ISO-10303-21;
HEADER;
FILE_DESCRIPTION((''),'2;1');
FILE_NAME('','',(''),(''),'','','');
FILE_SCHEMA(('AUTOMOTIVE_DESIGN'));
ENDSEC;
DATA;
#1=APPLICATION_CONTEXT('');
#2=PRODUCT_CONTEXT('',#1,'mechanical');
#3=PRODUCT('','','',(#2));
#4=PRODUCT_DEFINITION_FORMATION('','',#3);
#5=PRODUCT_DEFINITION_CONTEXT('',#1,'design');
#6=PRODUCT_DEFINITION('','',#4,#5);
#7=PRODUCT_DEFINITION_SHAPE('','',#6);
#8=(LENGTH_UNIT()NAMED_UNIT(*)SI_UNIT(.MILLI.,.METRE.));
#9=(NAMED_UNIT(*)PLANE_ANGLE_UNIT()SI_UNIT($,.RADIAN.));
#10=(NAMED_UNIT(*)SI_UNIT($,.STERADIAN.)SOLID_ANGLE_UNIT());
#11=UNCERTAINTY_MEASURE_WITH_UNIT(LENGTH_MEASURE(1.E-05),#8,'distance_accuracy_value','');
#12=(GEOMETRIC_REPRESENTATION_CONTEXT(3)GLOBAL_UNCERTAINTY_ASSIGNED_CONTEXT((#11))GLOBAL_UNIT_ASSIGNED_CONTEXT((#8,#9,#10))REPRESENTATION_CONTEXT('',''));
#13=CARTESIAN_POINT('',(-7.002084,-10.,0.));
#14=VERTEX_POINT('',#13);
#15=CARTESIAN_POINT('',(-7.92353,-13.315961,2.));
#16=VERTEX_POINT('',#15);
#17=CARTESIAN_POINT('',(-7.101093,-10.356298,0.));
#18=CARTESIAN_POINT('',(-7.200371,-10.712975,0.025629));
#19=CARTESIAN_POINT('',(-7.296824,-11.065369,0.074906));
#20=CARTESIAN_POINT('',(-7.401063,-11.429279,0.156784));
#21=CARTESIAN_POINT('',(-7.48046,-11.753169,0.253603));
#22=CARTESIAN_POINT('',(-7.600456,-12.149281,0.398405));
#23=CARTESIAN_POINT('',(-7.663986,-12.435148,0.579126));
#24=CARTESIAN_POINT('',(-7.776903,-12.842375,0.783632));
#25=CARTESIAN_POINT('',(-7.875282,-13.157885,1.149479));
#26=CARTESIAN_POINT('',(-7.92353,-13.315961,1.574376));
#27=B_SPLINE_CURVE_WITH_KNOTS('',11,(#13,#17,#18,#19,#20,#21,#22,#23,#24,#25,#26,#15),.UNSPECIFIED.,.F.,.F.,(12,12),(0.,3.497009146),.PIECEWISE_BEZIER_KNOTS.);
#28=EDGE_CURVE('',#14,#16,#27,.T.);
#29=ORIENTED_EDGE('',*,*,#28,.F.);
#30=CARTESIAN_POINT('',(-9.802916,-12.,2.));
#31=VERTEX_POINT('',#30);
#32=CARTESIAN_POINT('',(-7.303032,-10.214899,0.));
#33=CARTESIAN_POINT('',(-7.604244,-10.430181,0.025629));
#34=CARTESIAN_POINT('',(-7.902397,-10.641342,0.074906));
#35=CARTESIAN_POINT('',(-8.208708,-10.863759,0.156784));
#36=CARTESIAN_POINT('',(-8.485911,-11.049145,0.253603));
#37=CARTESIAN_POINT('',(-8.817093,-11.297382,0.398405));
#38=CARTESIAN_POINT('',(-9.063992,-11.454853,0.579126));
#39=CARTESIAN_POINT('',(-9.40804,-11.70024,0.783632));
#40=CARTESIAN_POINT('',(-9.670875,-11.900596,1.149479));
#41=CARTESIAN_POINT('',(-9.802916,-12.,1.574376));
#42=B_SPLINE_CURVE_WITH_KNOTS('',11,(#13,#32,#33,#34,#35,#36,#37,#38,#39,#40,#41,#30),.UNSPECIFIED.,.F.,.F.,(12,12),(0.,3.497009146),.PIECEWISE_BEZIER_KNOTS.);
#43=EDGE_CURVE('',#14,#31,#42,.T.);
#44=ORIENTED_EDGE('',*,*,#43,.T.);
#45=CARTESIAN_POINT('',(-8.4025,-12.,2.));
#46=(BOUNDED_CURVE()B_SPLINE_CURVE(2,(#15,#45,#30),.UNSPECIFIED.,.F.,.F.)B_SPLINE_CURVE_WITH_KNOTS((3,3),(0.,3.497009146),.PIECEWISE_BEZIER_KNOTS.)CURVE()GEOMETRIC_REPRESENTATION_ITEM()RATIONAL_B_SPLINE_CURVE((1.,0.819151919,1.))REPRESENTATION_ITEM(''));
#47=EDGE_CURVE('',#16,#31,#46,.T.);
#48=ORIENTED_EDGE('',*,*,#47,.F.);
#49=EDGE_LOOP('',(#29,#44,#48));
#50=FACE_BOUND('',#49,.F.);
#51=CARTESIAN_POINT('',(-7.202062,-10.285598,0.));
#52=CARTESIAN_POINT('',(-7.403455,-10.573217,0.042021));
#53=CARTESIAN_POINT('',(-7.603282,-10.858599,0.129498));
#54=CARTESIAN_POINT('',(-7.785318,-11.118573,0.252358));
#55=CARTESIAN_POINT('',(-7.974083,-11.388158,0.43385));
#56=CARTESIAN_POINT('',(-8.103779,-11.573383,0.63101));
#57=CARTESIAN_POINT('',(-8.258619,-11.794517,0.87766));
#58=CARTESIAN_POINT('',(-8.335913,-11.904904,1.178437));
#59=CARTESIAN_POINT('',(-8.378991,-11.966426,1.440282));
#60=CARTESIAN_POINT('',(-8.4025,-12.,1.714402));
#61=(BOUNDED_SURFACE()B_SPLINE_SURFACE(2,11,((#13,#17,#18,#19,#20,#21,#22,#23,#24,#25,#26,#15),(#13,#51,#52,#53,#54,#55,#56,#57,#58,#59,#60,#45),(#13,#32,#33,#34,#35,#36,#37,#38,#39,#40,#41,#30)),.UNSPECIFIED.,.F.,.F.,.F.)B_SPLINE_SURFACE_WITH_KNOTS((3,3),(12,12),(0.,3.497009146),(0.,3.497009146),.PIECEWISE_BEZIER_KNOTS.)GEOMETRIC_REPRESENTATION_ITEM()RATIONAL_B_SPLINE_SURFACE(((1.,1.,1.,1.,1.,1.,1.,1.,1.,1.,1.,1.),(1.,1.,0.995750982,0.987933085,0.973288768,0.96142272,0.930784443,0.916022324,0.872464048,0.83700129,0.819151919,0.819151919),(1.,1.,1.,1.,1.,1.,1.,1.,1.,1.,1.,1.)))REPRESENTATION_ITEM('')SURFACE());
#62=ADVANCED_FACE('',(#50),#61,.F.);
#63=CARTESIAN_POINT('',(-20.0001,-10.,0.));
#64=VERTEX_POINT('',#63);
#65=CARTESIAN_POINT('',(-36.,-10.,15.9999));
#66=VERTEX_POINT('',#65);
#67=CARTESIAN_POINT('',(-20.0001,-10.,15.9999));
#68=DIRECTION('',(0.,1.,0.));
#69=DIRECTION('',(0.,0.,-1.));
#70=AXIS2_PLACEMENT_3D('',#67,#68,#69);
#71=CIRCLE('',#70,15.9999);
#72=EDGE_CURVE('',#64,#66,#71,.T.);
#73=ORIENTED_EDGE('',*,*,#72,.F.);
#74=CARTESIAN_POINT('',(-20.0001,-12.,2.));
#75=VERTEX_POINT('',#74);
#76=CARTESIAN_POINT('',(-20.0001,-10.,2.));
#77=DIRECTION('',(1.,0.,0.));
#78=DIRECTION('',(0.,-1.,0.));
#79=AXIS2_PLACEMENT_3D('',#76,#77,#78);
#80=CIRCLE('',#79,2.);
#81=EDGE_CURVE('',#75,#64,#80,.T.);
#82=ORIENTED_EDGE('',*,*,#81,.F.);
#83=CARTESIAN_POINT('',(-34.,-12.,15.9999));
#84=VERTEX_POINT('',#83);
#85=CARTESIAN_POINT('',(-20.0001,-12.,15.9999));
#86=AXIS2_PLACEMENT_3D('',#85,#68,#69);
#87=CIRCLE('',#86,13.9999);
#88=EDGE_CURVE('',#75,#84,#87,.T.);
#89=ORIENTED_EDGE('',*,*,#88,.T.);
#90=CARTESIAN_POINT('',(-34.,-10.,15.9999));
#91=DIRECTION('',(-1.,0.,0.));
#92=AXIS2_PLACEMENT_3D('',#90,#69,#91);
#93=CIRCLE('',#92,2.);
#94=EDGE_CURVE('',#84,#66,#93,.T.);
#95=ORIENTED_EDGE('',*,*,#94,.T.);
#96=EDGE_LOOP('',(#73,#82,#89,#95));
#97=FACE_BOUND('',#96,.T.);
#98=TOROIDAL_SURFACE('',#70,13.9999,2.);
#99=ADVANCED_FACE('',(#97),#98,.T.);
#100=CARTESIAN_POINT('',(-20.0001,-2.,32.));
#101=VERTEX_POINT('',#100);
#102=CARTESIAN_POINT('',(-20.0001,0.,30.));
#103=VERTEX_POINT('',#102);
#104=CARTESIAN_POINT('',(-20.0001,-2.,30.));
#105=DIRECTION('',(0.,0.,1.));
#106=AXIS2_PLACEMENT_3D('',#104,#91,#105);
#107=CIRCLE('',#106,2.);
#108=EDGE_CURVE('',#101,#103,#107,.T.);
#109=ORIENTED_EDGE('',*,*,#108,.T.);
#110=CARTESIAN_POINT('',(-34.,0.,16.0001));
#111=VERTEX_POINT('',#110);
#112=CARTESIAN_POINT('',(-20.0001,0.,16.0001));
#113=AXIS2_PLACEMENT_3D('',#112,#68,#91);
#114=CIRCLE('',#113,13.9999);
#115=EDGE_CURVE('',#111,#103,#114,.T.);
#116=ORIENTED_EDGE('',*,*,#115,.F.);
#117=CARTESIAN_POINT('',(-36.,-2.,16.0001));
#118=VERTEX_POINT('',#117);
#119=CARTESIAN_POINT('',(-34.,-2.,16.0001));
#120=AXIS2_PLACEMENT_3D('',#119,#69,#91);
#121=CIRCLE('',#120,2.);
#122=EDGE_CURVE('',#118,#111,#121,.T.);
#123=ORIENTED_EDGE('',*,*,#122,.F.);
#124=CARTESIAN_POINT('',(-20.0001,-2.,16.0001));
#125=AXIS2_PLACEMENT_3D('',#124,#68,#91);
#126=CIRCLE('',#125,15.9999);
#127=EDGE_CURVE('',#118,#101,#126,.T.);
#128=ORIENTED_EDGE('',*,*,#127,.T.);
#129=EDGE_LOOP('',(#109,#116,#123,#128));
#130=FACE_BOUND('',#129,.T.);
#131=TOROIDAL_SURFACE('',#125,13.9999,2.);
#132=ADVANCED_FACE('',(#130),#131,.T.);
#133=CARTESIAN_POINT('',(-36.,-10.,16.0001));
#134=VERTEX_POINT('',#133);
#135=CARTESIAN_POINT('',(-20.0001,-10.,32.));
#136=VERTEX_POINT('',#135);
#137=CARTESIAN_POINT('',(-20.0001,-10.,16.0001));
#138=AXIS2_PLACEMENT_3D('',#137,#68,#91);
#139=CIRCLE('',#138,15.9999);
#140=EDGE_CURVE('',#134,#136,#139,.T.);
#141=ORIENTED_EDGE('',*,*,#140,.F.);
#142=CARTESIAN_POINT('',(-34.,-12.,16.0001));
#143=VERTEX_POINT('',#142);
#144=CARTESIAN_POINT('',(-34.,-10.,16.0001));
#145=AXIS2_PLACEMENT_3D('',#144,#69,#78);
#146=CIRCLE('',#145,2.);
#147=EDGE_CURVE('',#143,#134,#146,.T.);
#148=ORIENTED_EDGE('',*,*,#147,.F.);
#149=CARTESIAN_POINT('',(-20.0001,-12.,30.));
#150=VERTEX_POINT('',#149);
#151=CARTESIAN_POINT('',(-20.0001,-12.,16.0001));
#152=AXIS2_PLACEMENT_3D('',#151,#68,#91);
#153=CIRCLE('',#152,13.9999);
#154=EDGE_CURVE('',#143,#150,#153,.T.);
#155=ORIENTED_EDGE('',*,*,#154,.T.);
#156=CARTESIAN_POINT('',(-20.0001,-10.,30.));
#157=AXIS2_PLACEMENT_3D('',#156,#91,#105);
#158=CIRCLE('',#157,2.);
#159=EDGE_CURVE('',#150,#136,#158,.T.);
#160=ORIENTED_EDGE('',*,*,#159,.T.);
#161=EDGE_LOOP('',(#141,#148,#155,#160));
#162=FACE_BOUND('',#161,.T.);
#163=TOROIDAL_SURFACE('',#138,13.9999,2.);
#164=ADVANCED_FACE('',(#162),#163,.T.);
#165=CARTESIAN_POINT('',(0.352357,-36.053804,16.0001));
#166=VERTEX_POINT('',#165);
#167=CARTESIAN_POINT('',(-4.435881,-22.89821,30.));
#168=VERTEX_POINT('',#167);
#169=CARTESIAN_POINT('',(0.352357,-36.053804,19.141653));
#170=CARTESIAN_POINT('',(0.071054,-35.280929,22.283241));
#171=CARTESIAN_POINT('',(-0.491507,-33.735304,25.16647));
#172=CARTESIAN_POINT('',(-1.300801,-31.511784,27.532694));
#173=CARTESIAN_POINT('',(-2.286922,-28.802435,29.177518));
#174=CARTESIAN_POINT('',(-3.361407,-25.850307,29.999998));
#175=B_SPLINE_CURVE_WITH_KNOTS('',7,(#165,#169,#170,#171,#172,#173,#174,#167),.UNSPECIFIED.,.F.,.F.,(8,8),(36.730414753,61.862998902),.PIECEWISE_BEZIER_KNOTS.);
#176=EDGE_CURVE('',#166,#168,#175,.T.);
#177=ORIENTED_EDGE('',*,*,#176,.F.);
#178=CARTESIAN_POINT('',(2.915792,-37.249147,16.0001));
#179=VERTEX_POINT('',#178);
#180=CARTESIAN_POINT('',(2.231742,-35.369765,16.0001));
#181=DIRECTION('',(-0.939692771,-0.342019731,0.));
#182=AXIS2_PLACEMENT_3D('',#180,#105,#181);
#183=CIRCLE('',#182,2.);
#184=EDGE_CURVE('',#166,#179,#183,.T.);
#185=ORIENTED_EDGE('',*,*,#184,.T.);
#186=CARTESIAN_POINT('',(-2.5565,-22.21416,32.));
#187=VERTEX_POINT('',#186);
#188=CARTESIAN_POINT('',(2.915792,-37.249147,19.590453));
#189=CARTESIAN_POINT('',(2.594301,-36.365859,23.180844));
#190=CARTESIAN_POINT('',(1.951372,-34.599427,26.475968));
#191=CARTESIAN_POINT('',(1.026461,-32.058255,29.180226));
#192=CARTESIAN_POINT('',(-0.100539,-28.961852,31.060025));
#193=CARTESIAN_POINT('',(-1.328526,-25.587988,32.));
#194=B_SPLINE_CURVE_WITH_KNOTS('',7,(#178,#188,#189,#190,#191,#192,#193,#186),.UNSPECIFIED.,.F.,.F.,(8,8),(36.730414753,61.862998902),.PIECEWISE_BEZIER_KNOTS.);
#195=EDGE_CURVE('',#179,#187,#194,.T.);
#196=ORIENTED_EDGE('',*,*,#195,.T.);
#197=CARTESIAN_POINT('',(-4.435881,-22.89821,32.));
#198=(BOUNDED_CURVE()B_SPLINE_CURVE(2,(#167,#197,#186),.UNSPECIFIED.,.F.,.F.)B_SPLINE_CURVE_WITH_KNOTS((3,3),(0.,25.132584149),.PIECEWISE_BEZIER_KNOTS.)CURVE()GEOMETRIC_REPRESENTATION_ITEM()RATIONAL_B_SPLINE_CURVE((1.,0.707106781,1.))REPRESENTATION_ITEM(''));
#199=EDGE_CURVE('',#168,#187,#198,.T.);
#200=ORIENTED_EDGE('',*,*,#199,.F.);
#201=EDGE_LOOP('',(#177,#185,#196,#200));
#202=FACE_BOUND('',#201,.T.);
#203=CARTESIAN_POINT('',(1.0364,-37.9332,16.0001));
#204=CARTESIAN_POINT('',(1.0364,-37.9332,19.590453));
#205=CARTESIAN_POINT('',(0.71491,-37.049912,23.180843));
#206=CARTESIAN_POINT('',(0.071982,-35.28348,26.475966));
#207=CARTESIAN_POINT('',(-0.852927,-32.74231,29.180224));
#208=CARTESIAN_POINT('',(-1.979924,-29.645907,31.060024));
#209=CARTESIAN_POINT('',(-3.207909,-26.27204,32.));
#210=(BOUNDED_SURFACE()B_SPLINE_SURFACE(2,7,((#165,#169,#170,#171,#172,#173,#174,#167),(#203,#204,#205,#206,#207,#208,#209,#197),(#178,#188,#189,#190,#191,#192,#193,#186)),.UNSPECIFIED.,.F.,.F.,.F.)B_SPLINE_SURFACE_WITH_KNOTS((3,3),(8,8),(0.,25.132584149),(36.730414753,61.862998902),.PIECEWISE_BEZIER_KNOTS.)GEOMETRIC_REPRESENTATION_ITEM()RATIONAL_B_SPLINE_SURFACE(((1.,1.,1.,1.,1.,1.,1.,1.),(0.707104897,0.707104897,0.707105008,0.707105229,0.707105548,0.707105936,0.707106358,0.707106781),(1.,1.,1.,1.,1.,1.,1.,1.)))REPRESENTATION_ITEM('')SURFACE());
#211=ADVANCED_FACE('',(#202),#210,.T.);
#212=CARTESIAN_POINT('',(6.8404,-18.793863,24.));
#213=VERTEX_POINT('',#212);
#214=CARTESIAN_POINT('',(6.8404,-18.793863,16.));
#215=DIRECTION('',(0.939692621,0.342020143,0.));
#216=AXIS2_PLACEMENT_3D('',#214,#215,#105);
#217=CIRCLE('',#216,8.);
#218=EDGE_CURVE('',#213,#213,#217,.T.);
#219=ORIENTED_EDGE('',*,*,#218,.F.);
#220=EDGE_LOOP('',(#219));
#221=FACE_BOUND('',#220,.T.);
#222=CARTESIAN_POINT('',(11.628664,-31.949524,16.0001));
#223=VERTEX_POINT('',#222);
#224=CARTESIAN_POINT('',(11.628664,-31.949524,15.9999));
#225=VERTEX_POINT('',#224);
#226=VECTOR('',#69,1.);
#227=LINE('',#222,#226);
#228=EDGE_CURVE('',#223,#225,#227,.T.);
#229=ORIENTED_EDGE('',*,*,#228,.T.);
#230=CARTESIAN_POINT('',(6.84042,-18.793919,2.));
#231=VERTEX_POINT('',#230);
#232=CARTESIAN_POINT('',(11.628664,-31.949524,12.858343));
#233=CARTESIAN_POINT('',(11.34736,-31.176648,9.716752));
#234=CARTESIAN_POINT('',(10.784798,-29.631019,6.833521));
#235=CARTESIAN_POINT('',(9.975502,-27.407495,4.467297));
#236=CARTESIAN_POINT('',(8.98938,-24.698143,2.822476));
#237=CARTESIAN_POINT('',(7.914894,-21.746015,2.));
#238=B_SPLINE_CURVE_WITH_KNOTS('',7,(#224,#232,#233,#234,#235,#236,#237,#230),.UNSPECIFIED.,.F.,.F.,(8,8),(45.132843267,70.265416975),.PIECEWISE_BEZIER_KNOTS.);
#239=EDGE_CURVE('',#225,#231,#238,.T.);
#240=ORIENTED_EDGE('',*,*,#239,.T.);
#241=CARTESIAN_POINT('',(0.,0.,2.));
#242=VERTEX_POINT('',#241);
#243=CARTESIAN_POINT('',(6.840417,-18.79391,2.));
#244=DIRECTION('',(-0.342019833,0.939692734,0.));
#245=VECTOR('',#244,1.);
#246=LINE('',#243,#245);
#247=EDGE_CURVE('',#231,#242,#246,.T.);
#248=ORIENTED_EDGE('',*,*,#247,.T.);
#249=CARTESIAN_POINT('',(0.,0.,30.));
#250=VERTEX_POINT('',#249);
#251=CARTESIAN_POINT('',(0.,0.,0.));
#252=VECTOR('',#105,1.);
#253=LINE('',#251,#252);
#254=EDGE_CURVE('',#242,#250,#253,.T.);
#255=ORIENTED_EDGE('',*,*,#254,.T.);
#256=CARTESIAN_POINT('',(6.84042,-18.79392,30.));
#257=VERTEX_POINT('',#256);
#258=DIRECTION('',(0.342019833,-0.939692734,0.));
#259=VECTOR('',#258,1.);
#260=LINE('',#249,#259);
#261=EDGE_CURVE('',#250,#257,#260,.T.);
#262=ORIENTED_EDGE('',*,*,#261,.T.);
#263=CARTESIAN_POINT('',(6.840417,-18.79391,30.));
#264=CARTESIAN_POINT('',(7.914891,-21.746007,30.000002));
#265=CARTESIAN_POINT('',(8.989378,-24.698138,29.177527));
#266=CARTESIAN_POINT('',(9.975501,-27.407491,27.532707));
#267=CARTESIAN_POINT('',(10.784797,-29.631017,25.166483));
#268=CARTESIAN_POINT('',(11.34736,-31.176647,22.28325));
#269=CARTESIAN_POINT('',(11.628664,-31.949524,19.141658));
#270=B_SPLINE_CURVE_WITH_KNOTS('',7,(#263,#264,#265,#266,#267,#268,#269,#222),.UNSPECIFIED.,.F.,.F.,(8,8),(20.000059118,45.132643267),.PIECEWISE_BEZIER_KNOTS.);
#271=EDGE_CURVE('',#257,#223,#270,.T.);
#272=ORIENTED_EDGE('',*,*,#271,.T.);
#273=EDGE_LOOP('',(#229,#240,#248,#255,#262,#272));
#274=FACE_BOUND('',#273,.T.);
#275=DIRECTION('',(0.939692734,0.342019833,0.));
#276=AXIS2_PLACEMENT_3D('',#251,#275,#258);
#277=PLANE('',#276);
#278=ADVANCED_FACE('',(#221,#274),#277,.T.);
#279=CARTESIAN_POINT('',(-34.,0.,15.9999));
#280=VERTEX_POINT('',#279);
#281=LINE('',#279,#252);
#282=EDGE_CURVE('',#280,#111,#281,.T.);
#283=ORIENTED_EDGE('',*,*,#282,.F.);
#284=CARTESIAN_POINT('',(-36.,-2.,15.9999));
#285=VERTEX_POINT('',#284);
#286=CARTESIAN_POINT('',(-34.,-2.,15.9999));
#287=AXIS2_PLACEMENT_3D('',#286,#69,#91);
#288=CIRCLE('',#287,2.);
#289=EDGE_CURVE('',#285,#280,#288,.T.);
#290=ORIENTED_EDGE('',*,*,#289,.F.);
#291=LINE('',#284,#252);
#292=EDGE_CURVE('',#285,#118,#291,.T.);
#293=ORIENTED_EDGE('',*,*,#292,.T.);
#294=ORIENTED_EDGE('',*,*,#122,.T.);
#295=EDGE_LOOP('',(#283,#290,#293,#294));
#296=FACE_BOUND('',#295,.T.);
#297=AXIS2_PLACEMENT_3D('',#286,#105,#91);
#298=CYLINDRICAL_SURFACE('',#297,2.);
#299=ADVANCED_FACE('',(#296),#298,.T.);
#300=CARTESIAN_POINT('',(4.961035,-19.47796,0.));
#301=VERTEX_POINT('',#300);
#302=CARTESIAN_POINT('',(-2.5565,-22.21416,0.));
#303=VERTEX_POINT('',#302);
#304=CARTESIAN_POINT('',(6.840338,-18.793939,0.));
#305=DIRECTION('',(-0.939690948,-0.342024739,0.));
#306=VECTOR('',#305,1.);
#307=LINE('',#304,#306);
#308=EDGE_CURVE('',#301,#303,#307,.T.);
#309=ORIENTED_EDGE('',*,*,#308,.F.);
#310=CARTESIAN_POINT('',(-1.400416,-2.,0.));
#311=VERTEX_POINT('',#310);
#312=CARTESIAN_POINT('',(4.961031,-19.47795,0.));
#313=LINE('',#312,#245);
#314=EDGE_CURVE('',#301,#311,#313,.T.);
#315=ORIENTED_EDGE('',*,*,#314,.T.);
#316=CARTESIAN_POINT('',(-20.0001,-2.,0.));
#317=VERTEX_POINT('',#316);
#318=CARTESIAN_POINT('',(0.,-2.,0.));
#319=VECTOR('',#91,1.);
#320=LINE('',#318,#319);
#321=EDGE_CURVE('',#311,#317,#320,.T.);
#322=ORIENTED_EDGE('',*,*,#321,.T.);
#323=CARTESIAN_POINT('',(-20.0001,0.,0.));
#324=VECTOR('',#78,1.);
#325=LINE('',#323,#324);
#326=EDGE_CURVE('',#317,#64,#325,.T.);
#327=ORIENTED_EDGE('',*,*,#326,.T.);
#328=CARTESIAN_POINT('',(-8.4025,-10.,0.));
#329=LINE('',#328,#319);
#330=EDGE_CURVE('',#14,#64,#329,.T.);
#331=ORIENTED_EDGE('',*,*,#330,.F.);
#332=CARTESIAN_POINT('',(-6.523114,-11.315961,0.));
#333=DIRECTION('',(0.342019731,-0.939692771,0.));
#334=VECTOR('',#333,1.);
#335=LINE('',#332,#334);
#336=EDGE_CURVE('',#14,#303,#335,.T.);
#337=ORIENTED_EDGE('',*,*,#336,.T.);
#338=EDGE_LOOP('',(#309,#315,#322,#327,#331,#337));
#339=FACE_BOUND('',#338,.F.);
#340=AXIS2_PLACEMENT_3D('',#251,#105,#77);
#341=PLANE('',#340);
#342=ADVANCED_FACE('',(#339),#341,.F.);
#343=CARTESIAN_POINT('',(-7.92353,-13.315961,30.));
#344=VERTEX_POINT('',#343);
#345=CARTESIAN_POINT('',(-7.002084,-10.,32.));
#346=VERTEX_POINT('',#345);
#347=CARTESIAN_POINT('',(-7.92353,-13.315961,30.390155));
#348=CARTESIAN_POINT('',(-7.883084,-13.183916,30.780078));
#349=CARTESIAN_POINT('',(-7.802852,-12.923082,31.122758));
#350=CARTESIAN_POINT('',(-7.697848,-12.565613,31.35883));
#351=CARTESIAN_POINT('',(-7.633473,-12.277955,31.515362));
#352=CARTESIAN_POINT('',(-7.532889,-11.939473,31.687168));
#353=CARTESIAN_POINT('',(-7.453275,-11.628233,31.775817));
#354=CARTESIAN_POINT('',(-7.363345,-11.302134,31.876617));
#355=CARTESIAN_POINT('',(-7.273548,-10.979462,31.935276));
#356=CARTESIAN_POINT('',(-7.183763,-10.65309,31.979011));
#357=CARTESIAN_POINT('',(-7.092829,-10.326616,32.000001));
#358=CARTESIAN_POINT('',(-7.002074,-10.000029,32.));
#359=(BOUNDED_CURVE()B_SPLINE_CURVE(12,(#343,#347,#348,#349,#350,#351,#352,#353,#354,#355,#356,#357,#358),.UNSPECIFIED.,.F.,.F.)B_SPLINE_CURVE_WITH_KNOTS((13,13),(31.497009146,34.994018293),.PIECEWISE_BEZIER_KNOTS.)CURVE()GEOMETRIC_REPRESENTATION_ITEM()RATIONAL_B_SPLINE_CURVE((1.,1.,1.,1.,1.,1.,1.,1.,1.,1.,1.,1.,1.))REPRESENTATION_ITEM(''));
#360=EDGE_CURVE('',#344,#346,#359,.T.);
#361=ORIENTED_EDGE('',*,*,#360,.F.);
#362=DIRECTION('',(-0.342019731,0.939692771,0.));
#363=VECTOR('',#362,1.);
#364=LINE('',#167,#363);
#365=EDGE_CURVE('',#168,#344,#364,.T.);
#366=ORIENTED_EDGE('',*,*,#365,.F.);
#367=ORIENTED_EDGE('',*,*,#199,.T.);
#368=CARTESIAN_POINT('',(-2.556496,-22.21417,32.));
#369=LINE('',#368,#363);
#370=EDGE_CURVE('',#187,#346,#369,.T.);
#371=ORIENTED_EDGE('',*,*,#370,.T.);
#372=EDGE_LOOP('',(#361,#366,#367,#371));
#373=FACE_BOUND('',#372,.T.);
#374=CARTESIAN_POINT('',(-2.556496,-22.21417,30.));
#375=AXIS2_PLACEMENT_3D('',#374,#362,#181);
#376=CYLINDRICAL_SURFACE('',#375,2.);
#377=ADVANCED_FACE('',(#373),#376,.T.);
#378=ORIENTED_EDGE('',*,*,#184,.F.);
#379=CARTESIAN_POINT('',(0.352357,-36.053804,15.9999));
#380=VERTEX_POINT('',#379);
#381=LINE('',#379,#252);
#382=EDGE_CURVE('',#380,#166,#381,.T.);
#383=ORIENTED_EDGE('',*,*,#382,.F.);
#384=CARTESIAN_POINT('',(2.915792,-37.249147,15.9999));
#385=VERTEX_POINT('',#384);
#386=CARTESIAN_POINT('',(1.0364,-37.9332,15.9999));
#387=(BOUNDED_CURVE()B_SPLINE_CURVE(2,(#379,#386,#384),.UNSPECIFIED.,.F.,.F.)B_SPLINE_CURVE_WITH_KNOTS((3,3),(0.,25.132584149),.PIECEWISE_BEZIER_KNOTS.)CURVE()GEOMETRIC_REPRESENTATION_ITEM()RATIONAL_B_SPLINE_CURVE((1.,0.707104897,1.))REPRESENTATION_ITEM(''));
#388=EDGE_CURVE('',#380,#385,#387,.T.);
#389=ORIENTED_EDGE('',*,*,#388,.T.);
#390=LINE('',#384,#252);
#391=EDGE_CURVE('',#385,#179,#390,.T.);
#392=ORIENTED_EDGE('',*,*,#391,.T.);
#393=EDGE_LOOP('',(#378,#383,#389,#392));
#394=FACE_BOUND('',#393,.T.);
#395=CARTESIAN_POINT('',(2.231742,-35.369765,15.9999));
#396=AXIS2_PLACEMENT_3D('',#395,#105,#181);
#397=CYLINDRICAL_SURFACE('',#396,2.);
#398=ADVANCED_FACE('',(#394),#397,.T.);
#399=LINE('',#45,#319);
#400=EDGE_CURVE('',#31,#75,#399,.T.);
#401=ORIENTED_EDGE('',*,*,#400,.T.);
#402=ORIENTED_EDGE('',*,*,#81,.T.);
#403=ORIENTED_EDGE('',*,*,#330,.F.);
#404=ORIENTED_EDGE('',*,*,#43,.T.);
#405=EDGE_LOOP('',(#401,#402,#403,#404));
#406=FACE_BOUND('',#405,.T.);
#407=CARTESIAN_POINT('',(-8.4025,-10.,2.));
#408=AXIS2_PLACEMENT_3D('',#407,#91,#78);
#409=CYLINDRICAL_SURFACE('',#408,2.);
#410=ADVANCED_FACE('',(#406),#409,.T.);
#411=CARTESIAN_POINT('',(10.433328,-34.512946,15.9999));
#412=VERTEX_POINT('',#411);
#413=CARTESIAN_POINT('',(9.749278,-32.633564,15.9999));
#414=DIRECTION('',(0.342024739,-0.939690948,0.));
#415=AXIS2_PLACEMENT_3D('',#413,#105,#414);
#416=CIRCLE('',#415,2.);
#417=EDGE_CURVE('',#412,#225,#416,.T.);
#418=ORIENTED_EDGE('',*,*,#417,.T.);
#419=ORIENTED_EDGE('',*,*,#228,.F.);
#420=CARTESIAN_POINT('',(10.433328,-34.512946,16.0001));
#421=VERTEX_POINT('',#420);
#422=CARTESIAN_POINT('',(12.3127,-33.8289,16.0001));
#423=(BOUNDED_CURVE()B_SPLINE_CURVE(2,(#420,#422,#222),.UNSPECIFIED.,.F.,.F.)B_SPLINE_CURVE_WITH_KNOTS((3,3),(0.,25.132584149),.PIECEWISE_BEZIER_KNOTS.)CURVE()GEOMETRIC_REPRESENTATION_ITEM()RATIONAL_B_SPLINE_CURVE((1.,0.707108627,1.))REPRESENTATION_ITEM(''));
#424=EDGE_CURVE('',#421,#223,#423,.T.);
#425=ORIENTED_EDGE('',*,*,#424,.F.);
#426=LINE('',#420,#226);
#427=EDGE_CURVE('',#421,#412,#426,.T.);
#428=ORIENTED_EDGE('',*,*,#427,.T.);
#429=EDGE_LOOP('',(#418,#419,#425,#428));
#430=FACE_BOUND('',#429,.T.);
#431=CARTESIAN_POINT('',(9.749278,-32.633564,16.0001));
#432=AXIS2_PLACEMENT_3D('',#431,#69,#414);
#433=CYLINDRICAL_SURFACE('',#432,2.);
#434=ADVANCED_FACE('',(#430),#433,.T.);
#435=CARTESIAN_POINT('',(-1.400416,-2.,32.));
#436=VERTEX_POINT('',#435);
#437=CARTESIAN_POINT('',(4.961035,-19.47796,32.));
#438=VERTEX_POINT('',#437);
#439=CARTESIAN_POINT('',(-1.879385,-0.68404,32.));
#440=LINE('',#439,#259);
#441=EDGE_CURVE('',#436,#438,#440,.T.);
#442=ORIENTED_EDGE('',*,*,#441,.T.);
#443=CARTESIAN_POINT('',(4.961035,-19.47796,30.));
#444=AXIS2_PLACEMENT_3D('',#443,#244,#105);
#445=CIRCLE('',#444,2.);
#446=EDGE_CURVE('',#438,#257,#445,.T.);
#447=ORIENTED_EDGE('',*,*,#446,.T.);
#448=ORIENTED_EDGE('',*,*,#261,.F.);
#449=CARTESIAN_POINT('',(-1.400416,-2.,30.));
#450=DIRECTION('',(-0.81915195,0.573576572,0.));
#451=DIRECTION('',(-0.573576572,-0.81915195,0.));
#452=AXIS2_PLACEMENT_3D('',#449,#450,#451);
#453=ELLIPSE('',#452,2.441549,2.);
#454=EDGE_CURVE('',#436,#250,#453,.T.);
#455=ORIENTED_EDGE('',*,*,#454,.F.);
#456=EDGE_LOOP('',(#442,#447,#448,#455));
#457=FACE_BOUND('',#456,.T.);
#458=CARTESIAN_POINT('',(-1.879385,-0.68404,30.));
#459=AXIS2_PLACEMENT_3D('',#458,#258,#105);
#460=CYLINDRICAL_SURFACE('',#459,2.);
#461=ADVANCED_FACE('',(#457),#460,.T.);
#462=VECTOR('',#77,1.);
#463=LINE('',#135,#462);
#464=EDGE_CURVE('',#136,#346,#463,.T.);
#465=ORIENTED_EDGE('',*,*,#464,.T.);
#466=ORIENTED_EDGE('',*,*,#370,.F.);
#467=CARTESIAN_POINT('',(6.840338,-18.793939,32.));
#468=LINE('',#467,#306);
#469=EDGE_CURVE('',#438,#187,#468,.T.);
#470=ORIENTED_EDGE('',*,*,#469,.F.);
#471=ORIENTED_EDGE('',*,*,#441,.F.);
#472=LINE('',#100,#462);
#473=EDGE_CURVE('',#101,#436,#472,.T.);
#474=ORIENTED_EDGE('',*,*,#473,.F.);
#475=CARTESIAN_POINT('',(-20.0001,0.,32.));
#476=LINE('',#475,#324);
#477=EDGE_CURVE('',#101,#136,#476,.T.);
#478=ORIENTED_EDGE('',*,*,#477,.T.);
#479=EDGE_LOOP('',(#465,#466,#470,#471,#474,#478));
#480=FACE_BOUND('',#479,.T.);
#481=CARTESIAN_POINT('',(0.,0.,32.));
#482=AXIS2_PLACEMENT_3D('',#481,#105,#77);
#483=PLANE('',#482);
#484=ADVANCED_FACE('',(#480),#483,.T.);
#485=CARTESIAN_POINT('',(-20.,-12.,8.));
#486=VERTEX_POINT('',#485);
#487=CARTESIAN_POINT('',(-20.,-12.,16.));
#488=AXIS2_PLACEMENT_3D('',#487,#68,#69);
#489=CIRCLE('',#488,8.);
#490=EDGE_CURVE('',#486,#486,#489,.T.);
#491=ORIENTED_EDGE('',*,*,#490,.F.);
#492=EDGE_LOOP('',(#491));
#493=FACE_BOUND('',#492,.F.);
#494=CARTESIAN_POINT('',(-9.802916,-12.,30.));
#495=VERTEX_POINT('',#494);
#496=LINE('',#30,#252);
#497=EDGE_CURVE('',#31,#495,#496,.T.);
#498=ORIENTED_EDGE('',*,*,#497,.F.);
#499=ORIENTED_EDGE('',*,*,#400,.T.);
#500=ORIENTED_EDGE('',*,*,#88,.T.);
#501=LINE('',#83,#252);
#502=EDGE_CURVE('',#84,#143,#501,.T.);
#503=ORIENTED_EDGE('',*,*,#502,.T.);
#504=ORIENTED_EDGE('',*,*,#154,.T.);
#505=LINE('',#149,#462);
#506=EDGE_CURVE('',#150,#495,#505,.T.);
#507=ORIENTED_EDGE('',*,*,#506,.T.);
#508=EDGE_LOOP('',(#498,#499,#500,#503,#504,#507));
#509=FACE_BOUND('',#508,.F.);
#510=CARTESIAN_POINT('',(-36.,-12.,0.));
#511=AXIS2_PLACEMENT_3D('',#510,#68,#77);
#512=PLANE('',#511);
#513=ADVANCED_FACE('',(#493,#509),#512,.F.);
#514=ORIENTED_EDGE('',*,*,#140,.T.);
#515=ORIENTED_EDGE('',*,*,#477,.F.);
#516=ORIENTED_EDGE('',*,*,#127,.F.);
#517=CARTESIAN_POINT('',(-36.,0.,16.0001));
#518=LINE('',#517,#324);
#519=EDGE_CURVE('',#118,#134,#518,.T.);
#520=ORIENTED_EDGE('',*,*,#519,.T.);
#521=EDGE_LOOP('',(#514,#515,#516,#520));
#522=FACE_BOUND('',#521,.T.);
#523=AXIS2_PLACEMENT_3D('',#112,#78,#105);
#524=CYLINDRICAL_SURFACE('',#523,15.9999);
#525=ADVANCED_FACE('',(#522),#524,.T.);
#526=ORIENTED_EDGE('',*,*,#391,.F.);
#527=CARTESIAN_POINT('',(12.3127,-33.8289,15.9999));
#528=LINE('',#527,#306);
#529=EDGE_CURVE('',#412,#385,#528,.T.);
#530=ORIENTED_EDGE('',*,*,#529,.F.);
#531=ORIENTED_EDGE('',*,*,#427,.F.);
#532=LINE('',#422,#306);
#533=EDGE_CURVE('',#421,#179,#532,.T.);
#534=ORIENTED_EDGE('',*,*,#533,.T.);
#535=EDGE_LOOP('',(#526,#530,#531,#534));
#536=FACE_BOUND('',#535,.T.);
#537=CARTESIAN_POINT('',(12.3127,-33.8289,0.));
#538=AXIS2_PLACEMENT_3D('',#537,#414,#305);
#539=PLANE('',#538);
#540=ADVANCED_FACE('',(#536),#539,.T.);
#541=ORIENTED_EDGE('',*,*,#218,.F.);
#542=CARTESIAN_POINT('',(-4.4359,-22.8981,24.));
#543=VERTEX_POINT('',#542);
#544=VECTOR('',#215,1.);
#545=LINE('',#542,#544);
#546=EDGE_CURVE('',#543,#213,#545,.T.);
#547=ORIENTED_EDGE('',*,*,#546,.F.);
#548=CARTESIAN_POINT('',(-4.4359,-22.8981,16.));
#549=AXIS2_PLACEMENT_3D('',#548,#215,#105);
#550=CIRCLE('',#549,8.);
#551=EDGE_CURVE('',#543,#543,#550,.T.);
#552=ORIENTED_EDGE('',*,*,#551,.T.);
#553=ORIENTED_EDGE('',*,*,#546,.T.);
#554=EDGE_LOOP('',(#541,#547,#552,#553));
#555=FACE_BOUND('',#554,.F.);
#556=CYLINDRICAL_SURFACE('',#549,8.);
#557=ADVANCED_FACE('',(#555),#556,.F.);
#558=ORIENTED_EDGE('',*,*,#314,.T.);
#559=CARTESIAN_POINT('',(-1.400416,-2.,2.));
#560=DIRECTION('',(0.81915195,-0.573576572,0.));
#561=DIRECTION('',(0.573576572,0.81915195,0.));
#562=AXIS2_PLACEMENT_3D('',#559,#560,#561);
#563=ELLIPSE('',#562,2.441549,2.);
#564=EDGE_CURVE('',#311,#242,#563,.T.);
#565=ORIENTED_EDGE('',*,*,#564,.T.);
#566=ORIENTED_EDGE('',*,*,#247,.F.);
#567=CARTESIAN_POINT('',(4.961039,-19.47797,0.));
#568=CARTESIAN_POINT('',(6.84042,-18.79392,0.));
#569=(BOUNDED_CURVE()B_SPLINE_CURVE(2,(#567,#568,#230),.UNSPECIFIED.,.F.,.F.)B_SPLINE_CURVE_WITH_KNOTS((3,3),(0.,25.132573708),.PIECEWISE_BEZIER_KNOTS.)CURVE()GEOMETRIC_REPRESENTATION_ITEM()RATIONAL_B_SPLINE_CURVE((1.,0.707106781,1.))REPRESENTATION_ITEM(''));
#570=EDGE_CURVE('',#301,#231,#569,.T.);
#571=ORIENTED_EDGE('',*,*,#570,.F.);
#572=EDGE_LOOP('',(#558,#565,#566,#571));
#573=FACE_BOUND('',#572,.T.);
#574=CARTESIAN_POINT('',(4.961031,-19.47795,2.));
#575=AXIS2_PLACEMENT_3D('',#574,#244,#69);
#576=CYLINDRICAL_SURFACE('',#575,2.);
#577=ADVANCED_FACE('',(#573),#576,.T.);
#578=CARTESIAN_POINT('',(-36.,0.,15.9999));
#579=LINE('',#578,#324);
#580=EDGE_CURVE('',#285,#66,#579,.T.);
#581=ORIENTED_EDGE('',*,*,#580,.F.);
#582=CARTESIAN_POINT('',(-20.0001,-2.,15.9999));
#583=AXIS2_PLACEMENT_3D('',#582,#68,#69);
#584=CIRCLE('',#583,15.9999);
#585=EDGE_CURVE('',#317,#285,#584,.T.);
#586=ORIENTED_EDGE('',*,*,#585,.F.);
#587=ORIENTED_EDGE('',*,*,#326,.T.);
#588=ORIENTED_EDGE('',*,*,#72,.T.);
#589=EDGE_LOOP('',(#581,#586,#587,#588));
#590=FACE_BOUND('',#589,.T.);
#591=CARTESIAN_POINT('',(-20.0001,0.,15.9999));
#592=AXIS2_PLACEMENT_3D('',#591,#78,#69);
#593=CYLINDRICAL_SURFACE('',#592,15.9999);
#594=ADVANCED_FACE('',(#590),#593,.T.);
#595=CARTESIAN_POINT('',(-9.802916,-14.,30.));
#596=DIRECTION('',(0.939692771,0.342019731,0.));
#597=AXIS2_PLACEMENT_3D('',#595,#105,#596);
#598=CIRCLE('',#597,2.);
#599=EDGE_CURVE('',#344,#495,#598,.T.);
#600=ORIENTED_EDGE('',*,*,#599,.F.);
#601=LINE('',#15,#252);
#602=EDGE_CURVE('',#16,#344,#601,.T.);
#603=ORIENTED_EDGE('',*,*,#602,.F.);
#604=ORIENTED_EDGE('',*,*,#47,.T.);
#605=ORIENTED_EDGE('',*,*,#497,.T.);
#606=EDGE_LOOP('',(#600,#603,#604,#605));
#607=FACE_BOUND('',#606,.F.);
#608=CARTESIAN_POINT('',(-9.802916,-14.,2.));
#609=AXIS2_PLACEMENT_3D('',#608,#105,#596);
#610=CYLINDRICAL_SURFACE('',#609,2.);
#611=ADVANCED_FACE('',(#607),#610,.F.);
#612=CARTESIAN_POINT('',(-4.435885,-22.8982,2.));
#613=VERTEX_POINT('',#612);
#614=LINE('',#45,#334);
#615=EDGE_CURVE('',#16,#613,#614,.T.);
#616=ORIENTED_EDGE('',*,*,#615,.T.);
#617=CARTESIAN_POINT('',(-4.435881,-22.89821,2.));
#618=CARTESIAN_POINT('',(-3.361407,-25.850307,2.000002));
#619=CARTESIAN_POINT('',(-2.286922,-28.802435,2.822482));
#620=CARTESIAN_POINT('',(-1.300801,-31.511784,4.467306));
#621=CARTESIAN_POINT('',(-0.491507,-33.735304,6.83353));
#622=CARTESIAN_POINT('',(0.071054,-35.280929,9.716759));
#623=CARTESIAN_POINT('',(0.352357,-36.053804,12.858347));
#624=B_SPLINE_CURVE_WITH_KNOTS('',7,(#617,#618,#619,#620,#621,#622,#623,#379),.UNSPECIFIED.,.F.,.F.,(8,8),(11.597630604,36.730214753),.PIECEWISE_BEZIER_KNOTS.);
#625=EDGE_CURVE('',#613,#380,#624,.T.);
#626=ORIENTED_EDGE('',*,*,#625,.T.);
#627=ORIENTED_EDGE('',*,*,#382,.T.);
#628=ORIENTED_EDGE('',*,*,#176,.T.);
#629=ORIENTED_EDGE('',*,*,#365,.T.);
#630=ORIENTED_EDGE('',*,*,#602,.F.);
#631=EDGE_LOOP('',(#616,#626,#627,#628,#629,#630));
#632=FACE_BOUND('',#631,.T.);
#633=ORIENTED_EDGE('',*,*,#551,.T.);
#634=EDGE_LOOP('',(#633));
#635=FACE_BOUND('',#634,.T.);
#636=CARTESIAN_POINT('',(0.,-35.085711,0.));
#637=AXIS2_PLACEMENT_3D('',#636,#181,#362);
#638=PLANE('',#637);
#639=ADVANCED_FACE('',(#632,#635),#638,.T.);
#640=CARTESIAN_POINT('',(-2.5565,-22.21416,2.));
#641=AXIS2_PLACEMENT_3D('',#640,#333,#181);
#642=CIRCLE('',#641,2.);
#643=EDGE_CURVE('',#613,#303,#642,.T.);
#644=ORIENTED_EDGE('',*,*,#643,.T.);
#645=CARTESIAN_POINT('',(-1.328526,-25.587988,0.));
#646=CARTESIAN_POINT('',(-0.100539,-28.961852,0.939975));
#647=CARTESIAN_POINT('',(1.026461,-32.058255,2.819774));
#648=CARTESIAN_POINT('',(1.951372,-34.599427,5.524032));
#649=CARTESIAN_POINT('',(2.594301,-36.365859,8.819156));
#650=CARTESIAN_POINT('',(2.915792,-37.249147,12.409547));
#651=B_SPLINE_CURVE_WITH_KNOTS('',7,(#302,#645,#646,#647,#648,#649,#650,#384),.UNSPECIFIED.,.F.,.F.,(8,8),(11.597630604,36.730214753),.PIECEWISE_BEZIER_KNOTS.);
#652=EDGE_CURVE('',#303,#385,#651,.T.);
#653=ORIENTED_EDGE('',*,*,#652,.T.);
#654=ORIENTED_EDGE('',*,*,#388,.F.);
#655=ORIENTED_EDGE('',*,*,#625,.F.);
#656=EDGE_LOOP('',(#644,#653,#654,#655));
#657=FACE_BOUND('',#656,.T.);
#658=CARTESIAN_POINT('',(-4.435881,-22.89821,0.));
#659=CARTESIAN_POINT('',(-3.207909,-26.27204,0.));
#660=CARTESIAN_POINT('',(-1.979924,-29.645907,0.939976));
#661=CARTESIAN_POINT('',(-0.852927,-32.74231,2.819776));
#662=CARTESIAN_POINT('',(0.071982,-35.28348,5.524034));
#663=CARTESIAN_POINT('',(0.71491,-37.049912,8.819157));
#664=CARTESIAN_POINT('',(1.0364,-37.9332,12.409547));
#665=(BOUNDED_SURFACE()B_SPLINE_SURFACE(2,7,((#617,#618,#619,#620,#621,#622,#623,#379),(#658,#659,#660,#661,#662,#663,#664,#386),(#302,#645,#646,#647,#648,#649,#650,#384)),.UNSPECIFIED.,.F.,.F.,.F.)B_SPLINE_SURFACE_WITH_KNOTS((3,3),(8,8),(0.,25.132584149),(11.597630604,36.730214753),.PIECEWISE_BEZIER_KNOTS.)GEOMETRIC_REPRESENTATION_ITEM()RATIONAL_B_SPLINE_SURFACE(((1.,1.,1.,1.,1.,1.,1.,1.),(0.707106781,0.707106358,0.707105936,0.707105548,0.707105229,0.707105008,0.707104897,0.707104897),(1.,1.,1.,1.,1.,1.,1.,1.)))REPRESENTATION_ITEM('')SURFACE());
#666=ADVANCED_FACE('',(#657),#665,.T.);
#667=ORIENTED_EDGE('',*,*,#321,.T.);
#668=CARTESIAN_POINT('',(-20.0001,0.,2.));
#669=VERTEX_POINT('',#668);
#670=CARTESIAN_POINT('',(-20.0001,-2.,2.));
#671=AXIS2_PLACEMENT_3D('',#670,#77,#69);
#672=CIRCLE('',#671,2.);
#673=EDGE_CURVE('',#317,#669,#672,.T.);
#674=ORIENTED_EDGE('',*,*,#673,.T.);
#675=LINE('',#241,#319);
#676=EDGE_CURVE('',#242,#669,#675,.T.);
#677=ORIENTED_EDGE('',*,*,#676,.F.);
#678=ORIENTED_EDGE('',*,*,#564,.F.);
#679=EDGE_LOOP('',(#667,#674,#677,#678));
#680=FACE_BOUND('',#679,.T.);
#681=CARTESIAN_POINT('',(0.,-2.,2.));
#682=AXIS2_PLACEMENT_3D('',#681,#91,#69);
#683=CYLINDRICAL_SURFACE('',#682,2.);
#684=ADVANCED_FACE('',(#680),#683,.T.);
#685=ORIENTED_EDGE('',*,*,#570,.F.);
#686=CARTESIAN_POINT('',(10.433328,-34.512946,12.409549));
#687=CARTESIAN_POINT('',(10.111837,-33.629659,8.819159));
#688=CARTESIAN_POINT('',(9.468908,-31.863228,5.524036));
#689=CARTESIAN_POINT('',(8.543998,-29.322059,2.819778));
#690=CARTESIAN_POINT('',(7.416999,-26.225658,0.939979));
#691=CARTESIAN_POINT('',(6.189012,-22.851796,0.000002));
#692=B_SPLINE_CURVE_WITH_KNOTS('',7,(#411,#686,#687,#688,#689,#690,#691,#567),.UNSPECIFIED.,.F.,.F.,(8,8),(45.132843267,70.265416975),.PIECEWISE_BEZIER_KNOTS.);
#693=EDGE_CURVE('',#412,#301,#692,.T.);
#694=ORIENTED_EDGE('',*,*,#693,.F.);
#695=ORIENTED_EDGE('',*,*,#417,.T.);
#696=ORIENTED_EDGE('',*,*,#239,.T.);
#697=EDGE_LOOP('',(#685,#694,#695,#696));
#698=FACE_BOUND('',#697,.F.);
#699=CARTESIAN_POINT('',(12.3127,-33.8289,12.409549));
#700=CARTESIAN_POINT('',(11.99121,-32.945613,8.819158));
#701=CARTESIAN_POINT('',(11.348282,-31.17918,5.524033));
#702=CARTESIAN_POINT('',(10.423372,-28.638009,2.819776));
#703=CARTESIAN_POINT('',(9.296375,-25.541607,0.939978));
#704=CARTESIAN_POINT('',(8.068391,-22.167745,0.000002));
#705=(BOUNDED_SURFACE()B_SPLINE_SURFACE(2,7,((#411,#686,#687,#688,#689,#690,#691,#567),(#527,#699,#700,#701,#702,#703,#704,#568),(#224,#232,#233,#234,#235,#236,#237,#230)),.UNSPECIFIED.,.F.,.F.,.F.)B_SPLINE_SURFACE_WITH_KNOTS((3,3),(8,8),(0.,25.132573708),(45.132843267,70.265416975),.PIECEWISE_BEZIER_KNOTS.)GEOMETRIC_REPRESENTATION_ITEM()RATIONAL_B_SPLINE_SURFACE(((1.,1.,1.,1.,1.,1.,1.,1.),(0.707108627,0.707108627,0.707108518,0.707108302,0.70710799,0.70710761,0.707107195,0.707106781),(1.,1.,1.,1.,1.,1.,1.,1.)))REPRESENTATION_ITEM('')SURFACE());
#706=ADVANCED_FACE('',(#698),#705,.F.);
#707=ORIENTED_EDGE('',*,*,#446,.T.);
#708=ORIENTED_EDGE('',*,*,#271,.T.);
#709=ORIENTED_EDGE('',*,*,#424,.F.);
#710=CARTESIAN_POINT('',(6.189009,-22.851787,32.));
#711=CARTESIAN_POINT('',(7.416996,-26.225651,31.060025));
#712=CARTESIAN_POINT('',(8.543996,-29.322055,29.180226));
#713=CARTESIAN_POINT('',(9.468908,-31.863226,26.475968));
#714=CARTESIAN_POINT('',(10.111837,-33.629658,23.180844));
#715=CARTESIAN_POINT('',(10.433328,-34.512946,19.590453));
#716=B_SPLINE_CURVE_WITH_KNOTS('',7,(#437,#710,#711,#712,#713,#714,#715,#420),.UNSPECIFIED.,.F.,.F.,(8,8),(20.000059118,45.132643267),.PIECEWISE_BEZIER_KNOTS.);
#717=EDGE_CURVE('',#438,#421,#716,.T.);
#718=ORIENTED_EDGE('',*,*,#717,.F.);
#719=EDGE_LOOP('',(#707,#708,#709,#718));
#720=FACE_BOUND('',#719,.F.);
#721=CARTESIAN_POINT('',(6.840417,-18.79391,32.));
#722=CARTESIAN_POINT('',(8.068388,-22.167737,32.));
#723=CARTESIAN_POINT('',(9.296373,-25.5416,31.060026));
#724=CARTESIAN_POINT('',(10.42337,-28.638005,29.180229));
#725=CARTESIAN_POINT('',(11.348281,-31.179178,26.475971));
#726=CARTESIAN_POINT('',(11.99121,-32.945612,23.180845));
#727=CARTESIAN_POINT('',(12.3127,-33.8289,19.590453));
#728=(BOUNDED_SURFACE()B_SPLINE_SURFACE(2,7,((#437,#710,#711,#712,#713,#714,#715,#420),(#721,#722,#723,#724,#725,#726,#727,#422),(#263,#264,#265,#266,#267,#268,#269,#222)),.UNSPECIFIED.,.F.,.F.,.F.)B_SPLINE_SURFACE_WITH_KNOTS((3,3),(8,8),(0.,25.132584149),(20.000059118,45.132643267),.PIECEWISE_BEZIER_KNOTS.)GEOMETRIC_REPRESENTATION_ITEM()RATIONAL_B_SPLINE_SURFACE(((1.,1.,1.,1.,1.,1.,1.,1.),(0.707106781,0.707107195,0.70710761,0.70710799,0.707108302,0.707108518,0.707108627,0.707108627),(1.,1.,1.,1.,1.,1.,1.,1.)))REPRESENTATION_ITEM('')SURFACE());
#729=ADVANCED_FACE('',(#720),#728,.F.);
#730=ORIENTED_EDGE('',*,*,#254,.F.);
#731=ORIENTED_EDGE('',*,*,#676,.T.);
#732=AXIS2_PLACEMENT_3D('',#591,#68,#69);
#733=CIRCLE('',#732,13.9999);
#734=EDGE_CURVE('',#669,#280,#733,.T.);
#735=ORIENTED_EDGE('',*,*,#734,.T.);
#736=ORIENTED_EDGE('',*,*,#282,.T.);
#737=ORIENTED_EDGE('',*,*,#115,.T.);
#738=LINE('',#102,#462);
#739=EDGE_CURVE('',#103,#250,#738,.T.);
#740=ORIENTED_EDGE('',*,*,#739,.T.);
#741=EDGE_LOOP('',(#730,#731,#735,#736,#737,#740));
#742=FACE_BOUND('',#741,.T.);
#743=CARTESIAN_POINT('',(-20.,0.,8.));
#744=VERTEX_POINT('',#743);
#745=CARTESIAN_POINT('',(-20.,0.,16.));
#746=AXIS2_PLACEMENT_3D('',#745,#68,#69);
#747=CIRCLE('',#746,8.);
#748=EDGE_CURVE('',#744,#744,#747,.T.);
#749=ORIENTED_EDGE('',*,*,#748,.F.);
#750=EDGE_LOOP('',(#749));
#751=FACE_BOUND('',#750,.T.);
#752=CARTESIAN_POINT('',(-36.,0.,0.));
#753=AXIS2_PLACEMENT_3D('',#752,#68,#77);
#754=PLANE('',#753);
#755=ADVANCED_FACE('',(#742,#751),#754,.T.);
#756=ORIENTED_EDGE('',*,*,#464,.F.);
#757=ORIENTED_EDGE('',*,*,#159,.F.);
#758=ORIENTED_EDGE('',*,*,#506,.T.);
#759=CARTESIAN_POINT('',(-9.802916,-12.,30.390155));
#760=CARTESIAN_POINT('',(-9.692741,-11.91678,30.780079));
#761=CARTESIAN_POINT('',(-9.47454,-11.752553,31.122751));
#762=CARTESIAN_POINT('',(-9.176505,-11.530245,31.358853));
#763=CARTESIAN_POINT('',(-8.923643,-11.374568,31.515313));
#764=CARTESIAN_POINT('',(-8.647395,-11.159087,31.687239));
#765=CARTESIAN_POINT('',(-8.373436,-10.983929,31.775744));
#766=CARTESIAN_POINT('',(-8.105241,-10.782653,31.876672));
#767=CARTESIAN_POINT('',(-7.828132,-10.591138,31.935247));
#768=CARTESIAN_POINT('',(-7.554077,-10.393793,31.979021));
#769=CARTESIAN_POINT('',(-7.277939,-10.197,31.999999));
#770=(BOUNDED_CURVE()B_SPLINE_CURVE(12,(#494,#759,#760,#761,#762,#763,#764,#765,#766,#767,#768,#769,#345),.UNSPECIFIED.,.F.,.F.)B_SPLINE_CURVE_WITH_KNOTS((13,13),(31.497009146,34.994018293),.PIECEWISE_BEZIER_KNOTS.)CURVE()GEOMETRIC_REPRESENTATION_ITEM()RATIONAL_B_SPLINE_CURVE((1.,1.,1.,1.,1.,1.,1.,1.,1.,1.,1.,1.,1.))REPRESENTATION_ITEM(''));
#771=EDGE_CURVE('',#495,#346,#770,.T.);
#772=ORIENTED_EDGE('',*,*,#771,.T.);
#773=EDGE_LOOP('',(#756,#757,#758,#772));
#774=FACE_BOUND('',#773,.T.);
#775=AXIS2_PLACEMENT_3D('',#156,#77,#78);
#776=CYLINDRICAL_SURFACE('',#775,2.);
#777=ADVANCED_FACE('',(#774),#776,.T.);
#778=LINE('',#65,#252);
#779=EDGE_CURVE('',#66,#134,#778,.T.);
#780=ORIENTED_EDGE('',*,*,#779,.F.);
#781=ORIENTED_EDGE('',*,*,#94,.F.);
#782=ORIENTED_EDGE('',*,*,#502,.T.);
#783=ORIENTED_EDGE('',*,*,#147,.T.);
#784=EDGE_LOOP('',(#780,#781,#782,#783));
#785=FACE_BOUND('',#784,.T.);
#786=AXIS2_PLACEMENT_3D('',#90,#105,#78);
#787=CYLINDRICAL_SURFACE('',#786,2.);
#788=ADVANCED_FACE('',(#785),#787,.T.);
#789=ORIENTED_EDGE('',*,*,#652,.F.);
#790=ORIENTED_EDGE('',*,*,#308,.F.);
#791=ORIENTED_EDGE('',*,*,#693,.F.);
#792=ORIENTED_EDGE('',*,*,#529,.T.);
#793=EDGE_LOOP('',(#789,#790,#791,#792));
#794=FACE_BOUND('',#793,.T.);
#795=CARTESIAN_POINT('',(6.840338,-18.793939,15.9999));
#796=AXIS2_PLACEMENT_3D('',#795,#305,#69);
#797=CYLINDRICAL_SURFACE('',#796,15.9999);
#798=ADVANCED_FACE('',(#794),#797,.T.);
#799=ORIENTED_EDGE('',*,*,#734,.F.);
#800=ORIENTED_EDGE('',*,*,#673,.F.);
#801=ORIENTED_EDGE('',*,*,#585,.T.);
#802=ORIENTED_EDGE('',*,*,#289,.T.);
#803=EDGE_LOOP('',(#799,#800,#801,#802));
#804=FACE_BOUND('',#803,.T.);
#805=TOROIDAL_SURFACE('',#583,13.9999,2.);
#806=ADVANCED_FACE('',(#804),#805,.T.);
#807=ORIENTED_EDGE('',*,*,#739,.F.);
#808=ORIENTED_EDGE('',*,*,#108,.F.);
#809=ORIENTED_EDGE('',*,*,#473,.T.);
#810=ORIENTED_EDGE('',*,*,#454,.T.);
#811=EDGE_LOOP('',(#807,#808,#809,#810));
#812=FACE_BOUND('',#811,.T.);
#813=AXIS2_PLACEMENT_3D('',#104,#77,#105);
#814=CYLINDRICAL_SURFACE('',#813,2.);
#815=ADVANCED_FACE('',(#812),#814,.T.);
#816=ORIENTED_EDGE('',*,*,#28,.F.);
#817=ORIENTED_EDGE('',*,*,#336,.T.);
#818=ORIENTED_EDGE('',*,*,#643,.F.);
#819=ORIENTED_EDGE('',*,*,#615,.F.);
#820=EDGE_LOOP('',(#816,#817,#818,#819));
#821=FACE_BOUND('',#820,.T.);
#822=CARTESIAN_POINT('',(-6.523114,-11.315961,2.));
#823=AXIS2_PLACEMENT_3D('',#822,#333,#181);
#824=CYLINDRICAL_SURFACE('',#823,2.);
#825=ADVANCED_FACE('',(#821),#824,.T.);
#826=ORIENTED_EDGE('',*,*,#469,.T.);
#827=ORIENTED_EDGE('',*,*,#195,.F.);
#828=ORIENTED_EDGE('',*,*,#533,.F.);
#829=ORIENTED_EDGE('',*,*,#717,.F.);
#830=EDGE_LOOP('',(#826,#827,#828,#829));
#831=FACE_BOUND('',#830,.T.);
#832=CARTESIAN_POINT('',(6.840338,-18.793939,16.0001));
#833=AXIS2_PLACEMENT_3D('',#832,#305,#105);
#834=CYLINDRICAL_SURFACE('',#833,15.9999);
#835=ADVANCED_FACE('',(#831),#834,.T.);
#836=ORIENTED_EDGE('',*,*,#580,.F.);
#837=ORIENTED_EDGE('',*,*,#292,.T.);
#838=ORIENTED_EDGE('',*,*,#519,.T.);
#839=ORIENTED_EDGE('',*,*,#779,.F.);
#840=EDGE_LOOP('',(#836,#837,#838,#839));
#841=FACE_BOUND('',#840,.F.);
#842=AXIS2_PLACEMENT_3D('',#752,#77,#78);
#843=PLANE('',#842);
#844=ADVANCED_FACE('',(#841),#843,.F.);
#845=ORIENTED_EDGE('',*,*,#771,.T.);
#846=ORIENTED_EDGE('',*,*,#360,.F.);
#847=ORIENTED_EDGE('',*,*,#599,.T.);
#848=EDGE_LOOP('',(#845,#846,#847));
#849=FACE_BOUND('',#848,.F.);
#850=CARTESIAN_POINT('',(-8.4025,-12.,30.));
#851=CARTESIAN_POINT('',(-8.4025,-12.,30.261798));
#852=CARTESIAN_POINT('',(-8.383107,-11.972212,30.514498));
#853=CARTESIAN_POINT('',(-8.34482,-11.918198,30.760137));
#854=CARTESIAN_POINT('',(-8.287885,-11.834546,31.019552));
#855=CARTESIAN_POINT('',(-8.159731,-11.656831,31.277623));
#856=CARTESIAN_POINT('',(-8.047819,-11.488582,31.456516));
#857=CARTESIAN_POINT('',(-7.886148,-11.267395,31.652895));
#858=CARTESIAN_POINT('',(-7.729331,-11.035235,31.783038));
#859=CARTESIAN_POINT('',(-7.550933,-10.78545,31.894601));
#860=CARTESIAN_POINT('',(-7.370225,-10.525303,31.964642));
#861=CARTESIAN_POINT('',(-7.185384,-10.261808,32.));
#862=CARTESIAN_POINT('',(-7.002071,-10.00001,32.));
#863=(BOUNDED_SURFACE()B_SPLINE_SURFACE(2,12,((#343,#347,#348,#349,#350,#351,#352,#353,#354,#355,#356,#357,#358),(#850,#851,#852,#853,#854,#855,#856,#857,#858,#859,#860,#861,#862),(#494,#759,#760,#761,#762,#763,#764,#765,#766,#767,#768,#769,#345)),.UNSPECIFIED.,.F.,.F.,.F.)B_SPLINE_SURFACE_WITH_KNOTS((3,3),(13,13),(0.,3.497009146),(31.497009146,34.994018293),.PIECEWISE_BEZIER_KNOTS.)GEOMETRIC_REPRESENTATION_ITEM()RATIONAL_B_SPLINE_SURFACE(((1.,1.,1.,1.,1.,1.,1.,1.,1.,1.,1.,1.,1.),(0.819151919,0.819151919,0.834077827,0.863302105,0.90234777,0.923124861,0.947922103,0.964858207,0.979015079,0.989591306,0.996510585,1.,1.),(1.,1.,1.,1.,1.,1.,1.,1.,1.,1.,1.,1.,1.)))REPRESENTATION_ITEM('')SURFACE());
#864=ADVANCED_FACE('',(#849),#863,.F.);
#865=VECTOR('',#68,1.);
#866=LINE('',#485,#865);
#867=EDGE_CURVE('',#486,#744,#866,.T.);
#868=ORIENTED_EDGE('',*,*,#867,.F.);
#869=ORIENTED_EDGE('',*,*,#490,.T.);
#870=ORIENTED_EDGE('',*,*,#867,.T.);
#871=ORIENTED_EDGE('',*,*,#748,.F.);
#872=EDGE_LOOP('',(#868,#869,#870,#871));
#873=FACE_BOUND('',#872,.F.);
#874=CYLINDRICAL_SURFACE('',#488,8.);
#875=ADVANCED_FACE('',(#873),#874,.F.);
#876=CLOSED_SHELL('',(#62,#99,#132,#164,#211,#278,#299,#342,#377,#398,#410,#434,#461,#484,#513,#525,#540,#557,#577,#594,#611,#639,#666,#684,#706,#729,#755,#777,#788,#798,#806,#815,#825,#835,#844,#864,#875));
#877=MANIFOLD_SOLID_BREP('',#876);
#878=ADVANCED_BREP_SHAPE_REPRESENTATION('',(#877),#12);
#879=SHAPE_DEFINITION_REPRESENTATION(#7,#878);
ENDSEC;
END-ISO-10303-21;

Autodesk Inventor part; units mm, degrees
ref_plane "YZ Plane" through (0, 0, 0) normal (1, 0, 0) x (0, 1, 0)
ref_plane "XZ Plane" through (0, 0, 0) normal (0, 1, 0) x (-1, 0, 0)
ref_plane "XY Plane" through (0, 0, 0) normal (0, 0, 1) x (1, 0, 0)
sketch "Sketch1" plane through (0, 0, 0) normal (0, 0, 1) x (1, 0, 0)
  line L0 (0, -45.5198) -> (0, 7.5866) projected
  line L1 (-45.6625, 0) -> (21.9753, 0) projected
  line L2 (0, 0) -> (-36, 0)
  line L3 (-36, 0) -> (-36, -12)
  line L4 (-36, -12) -> (-8.4025, -12)
  line L5 (-8.4025, -12) -> (0, 0) construction
  line L6 (0, 0) -> (12.3127, -33.8289)
  line L7 (12.3127, -33.8289) -> (1.0364, -37.9332)
  line L8 (1.0364, -37.9332) -> (-8.4025, -12)
  dimension "d0" = 36
  dimension "d1" = 12
  dimension "d2" = 55
extrude "Extrusion1" add sketch "Sketch1" along normal blind 32
fillet "Fillet1" radius 16 4 edges at (-36, -6, 32) (6.6746, -35.8811, 32) (6.6746, -35.8811, 0) (-36, -6, 0)
hole "Hole1" at (-20, -12, 16) direction (0, 1, 0) diameter 16 end through all
hole "Hole2" at (-4.4359, -22.8981, 16) direction (0.9396926, 0.3420201, 0) diameter 16 end through all
fillet "Fillet2" radius 2 12 edges at (3.4202, -9.397, 32) (10.7099, -29.4253, 27.3137) (3.4202, -9.397, 0) (-6.4192, -17.4491, 32) (-0.5664, -33.5295, 27.3137) (-6.4192, -17.4491, 0) (-14.2013, -12, 32) (-31.3137, -12, 27.3137) (-14.2013, -12, 0) (-10.0001, 0, 32) (-31.3137, 0, 27.3137) (-10.0001, 0, 0)
fillet "Fillet3" radius 2 3 edges at (-8.4025, -12, 16) (-7.9923, -11.4142, 31.4142) (-7.9923, -11.4142, 0.5858)
properties part number "Levier"
